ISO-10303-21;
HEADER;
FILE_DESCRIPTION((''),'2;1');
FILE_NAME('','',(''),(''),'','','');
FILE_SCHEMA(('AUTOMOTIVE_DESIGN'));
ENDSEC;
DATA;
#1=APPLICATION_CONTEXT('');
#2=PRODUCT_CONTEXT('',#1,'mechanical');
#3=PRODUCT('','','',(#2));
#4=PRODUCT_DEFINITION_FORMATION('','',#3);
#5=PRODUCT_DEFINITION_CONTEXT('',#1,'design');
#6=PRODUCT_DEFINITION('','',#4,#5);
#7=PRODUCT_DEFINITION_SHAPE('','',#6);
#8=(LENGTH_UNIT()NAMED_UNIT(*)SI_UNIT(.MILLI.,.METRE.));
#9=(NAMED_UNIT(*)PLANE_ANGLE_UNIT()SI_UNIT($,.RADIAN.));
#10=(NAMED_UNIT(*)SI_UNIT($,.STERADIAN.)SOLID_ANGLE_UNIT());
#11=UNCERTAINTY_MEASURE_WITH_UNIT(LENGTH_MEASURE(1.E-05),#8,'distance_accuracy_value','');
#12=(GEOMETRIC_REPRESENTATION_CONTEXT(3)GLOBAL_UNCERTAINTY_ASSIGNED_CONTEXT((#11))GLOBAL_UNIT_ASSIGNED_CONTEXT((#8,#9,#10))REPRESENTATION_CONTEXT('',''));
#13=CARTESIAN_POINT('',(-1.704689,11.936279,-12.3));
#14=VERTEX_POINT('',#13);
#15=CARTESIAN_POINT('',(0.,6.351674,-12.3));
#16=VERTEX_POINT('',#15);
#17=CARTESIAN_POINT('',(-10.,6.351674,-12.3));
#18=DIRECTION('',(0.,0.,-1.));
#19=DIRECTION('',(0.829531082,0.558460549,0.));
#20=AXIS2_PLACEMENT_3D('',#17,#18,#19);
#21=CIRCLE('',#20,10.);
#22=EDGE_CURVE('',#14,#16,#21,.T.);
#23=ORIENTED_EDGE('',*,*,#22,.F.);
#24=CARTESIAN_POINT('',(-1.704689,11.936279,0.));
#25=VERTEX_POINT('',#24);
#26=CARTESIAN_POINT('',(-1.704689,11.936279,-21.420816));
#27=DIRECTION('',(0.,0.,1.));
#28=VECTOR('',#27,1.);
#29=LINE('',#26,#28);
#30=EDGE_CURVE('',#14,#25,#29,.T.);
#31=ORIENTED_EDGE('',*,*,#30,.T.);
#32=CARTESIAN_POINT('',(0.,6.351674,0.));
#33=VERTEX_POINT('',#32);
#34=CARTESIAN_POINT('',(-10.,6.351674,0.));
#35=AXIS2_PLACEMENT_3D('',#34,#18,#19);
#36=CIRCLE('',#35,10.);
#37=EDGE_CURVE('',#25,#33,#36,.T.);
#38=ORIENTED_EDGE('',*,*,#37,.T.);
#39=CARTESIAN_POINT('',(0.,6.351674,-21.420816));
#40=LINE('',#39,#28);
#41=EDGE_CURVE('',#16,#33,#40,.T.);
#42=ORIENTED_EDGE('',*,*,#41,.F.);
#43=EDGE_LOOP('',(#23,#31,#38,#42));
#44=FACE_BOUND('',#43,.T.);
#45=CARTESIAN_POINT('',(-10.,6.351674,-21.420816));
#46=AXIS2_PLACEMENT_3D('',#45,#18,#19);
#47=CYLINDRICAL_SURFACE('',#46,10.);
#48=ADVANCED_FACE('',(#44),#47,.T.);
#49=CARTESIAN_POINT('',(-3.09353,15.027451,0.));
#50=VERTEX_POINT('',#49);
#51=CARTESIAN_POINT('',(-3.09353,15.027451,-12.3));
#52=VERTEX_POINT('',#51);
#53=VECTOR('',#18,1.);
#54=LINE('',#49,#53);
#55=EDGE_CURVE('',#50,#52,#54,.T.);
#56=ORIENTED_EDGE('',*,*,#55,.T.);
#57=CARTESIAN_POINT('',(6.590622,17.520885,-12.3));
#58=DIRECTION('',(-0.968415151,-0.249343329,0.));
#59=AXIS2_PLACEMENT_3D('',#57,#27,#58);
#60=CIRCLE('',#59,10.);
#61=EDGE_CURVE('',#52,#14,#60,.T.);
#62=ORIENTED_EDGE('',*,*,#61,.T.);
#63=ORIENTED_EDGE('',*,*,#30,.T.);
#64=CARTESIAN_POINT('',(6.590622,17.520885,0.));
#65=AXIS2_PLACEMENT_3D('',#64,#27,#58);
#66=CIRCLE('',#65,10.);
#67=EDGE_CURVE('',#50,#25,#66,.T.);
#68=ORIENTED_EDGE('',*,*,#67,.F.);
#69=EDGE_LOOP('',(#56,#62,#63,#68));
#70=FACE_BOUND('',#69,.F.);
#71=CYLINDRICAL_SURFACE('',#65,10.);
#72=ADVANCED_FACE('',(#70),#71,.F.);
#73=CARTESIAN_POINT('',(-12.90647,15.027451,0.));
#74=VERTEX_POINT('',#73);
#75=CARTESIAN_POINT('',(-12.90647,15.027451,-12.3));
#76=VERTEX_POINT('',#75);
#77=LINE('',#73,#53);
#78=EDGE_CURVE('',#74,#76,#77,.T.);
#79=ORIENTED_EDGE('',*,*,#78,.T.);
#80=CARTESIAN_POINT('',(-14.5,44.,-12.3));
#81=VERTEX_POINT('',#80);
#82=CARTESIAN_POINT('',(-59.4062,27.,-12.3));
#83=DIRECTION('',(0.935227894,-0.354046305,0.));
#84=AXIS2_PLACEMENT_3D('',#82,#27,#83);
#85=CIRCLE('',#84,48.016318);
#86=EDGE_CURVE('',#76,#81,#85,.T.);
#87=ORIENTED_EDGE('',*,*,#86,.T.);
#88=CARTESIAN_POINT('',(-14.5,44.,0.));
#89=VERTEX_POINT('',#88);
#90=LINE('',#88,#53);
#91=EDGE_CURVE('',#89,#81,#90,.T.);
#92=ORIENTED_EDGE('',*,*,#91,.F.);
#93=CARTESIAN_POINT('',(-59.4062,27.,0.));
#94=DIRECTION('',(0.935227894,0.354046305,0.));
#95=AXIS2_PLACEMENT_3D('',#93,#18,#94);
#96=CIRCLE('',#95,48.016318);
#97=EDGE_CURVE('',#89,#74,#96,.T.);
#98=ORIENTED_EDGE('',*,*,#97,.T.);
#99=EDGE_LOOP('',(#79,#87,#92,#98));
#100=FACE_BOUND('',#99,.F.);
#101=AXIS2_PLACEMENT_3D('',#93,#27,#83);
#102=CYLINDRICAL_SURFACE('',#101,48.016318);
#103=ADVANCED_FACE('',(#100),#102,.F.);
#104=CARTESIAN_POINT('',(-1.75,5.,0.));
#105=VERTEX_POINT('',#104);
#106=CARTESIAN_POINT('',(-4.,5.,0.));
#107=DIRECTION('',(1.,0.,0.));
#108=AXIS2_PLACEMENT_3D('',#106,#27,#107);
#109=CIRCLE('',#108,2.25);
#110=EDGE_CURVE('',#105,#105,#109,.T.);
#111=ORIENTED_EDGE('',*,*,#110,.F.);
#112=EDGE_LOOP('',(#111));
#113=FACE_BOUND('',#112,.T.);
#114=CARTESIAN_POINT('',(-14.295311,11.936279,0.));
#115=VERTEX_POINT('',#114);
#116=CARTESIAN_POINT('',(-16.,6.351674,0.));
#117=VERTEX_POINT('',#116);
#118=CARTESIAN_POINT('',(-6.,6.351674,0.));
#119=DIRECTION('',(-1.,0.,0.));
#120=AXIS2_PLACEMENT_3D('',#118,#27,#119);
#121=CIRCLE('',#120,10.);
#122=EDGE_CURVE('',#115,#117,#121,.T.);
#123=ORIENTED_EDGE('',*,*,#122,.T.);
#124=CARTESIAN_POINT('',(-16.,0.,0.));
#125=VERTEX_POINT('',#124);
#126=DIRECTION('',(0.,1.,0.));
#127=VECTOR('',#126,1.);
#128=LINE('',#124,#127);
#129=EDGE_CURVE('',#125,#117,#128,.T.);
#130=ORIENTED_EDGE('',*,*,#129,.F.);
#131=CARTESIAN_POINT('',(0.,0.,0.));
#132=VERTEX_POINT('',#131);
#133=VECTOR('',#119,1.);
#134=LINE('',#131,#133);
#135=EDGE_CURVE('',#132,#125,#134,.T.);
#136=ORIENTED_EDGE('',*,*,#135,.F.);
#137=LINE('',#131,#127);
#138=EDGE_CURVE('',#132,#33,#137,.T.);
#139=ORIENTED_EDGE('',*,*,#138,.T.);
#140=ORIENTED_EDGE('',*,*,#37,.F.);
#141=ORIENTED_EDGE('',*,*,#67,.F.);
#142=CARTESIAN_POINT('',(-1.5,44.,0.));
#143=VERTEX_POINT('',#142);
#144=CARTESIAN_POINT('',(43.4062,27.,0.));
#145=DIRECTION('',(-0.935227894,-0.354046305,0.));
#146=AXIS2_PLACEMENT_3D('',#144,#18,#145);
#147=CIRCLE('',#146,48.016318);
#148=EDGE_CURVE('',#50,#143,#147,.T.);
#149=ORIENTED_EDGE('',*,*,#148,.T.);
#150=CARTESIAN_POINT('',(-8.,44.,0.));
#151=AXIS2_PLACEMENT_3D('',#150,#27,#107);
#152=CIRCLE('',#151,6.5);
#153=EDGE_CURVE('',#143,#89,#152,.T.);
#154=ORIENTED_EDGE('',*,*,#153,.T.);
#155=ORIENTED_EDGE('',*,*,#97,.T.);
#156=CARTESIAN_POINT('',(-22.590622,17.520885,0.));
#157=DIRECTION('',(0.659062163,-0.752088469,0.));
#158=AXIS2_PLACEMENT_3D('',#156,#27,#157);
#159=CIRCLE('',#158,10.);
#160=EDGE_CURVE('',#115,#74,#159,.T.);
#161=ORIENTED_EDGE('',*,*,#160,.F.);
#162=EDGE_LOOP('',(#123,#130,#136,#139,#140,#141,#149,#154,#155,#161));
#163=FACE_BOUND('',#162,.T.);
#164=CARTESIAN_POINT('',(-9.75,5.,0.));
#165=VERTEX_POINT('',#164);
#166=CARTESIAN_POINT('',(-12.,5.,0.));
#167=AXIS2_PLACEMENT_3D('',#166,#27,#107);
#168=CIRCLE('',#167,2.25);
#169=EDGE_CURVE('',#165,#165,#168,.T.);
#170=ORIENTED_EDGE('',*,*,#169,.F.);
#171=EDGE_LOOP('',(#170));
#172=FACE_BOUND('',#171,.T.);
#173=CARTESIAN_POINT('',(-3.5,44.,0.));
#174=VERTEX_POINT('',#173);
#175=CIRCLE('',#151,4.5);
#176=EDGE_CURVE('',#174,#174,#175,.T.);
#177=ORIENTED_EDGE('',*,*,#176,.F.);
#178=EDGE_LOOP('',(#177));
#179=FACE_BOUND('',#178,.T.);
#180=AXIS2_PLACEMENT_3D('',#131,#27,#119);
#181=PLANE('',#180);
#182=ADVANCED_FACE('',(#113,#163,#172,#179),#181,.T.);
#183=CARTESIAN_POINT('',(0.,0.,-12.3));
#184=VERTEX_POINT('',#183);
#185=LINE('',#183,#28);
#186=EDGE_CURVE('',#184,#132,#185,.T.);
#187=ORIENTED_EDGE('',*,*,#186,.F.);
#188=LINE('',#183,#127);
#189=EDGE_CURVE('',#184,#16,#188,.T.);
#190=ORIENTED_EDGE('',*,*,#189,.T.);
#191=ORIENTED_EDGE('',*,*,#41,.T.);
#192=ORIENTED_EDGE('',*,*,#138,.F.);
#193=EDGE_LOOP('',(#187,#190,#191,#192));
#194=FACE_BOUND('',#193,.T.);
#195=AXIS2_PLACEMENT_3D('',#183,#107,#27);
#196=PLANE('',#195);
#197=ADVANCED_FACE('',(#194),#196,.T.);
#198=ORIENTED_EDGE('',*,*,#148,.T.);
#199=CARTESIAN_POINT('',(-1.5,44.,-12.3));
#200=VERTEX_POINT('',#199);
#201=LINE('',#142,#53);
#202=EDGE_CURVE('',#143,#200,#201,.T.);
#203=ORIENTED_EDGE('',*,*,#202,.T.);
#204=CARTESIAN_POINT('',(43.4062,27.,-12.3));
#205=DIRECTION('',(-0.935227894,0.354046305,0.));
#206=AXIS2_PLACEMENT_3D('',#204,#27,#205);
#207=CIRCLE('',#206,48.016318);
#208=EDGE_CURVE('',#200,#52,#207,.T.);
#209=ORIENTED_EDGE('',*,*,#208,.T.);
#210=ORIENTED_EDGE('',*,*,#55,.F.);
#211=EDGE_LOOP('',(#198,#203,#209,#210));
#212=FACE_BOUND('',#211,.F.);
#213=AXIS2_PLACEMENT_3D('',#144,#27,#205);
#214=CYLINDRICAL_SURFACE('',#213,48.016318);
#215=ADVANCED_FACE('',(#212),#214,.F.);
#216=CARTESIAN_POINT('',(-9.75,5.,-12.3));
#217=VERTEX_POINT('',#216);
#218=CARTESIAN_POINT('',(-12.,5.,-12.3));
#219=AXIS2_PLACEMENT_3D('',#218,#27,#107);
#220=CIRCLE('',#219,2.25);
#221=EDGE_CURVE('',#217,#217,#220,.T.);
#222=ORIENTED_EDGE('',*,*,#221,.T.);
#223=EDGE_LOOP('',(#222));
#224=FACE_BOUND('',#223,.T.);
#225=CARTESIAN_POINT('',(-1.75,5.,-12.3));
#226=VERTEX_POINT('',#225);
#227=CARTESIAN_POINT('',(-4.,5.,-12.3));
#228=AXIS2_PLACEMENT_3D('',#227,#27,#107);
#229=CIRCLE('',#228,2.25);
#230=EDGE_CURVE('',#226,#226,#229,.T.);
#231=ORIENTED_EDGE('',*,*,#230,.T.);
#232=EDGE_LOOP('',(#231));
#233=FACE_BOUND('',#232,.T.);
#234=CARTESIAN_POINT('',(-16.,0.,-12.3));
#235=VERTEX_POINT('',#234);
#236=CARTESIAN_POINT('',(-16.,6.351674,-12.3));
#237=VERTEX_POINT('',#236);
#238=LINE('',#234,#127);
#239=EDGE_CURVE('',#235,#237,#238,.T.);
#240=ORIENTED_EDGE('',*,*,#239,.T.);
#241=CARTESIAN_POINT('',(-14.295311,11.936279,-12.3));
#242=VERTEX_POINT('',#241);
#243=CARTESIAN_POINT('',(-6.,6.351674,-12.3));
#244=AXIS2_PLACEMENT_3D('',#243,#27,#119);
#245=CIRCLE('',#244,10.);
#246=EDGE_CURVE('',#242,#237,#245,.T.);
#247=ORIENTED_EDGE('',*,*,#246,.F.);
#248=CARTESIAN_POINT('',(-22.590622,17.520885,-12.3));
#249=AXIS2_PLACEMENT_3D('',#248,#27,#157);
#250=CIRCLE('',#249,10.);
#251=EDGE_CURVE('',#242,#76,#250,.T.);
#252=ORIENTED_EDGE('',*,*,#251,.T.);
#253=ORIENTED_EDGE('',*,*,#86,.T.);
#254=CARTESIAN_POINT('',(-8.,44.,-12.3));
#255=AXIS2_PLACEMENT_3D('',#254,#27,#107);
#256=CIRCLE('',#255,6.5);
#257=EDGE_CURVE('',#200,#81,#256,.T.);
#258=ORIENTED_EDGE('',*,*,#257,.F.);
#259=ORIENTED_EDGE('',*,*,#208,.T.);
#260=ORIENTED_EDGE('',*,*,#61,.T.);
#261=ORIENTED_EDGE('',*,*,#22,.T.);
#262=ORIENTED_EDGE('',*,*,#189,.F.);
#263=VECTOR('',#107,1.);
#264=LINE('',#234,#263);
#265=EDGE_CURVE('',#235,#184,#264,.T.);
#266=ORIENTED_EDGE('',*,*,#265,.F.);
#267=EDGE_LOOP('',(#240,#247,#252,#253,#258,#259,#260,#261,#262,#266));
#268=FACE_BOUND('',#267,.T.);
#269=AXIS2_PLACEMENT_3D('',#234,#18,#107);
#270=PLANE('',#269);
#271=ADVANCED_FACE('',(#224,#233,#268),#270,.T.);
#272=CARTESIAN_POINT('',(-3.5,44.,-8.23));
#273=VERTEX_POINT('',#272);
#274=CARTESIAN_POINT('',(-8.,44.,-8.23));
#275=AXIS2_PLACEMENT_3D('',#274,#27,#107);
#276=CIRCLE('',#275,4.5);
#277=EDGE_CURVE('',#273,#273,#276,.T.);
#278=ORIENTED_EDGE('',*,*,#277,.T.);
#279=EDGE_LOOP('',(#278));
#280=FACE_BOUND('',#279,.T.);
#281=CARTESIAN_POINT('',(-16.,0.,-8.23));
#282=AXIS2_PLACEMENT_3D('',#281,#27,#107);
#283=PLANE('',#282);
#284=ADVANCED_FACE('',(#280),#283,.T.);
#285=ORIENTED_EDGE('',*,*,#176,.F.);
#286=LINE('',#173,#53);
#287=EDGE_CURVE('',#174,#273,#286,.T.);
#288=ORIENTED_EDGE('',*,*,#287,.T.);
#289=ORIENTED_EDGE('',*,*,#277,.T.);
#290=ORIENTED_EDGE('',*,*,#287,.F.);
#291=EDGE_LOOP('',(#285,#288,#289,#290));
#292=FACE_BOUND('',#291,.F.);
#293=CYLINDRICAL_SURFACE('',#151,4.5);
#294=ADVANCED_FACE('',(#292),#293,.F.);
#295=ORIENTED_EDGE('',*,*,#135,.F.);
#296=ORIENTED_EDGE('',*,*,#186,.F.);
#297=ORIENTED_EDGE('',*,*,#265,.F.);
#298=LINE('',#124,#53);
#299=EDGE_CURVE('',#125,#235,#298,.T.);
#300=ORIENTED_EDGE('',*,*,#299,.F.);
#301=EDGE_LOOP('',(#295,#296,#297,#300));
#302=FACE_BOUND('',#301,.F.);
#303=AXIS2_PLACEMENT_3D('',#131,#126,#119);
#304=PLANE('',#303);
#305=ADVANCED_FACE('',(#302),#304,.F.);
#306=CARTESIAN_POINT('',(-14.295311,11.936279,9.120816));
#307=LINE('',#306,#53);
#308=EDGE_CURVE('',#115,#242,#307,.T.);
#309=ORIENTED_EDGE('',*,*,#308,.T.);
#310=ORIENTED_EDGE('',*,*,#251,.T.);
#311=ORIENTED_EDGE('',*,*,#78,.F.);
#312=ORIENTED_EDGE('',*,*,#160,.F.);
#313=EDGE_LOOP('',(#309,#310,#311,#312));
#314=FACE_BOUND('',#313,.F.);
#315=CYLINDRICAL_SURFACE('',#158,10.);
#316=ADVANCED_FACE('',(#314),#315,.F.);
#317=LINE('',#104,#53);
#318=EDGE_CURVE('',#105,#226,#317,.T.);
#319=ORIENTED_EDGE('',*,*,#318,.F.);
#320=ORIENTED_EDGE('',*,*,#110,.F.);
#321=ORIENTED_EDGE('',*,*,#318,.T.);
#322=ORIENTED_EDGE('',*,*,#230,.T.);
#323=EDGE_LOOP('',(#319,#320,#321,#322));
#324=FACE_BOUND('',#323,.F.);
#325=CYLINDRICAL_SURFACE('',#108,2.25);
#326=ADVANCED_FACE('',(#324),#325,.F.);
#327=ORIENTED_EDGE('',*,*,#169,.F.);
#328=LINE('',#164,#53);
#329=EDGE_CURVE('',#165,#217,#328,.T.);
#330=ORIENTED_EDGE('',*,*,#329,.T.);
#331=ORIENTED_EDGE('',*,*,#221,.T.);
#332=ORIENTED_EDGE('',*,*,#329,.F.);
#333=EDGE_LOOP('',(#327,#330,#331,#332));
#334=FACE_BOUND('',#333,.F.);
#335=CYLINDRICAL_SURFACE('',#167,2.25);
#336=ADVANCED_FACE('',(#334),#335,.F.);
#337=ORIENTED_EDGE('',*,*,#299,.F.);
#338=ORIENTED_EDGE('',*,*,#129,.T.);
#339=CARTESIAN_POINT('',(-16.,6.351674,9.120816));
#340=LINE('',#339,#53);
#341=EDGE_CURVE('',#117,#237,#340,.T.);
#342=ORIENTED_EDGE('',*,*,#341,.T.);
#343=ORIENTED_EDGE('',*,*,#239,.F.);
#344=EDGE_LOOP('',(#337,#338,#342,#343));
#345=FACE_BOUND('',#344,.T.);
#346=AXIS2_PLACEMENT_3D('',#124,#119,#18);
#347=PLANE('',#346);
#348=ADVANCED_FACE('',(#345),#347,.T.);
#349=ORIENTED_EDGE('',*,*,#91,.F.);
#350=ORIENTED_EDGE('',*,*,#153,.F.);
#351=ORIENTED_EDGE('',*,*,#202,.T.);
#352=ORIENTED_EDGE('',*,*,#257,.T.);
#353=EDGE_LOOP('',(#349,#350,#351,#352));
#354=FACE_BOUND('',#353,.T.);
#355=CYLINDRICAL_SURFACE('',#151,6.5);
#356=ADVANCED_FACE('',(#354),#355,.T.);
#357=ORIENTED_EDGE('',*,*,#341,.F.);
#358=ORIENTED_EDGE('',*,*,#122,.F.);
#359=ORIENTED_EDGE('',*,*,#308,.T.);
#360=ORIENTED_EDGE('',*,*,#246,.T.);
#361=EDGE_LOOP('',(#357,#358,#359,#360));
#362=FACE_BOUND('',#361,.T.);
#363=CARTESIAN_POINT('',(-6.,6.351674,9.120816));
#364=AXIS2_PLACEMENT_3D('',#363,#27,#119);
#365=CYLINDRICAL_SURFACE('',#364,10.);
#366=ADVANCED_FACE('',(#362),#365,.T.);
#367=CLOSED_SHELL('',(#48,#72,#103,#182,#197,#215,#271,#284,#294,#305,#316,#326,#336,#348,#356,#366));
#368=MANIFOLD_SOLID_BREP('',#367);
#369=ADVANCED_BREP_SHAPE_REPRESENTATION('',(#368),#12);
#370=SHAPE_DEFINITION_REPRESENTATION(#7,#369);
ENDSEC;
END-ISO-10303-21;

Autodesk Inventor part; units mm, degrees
ref_plane "YZ Plane" through (0, 0, 0) normal (1, 0, 0) x (0, 1, 0)
ref_plane "XZ Plane" through (0, 0, 0) normal (0, 1, 0) x (-1, 0, 0)
ref_plane "XY Plane" through (0, 0, 0) normal (0, 0, 1) x (1, 0, 0)
sketch "Sketch1" plane through (0, 0, 0) normal (0, 1, 0) x (-1, 0, 0)
  line L0 (0, 0) -> (16, 0)
  line L1 (16, 0) -> (16, -12.3)
  line L2 (16, -12.3) -> (0, -12.3)
  line L3 (0, -12.3) -> (0, 0)
  dimension "d0" = 16
  dimension "d1" = 12.3
extrude "Extrusion1" add sketch "Sketch1" along normal blind 10
sketch "Sketch2" plane through (0, 10, 0) normal (0, 1, 0) x (1, 0, 0)
  line L0 (-16, 0) -> (0, 0) projected
  line L1 (-8, 0) -> (-8, 12.3)
  line L2 (0, 12.3) -> (-16, 12.3) projected
  line L3 (-14.5, 0) -> (-14.5, 12.3)
  line L4 (-1.5, 0) -> (-1.5, 12.3)
  dimension "d4" = 6.5
  dimension "d5" = 6.5
extrude "Extrusion2" add sketch "Sketch2" along normal blind 40.5
sketch "Sketch3" plane through (-16, 0, 0) normal (0, 0, 1) x (1, 0, 0)
  line L0 (14.5, 50.5) -> (1.5, 50.5) projected
  line L1 (8, 50.5) -> (8, 0)
  line L2 (0, 0) -> (16, 0) projected
  circle A0 centre (8, 44) radius 4.5
  line L3 (1.5, 50.5) -> (14.5, 50.5) projected
  circle A1 centre (8, 44) radius 6.5
  line L4 (14.5, 10) -> (14.5, 50.5) projected
  line L5 (14.5, 30.25) -> (1.5, 30.25)
  line L6 (1.5, 10) -> (1.5, 50.5) projected
  line L7 (8, 30.25) -> (11.5, 30.25)
  arc A2 (14.5, 44) -> (14.5, 10) centre (59.4062, 27) ccw
  line L8 (8, 30.25) -> (4.5, 30.25)
  arc A3 (1.5, 10) -> (1.5, 44) centre (-43.4062, 27) ccw
  dimension "d8" = 6.5
  dimension "d9" = 9
  dimension "d10" = 13
  dimension "d11" = 3.5
  dimension "d12" = 3.5
extrude "Extrusion3" cut sketch "Sketch3" against normal blind 13.5 contours L4 A1 L0 | A1 L6 L0 | L4 L5 A2 A1 | A1 A2 | A3 A1 | A1 A3 L5 L6 | L4 A2 L5 | L5 A3 L6
fillet "Fillet1" radius 10 4 edges at (0, 10, -6.15) (-1.5, 10, -6.15) (-14.5, 10, -6.15) (-16, 10, -6.15)
sketch "Sketch4" plane through (-16, 0, 0) normal (0, 0, 1) x (1, 0, 0)
  arc A0 (14.5, 44) -> (1.5, 44) centre (8, 44) ccw projected
  circle A1 centre (8, 44) radius 4.5
  point P0 (16, 0)
  dimension "d16" = 9
extrude "Extrusion4" cut sketch "Sketch4" against normal blind 8.23
sketch "Sketch5" plane through (0, 0, 0) normal (0, -1, 0) x (1, 0, 0)
  point P0 (0, 0)
sketch "Sketch7" plane through (-16, 0, 0) normal (0, 0, 1) x (1, 0, 0)
  line L0 (16, 0) -> (0, 0) projected
  line L1 (0, 0) -> (16, 0)
  line L2 (16, 0) -> (16, 10)
  line L3 (16, 10) -> (0, 10)
  line L4 (0, 10) -> (0, 0)
  line L5 (0, 5) -> (16, 5)
  line L6 (8, 10) -> (8, 0)
  circle A0 centre (4, 5) radius 1
  circle A1 centre (12, 5) radius 1
extrude "Extrusion6" cut sketch "Sketch7" against normal blind 12.3 contours A1 L5 | L5 A1 | A0 L5 | L5 A0
sketch "Sketch8" plane through (-16, 0, 0) normal (0, 0, 1) x (1, 0, 0)
  circle A0 centre (4, 5) radius 1 projected
  circle A1 centre (4, 5) radius 2.25
  circle A2 centre (12, 5) radius 1 projected
  circle A3 centre (12, 5) radius 2.25
  point P0 (16, 0)
  dimension "d24" = 4.5
  dimension "d25" = 4.5
extrude "Extrusion7" cut sketch "Sketch8" against normal blind 12.5
sketch "Sketch9" plane through (-16, 0, 0) normal (0, 0, 1) x (1, 0, 0)
  line L0 (0, 0) -> (0, 6.3517) projected
  line L1 (0, 5) -> (16, 5)
  point P0 (16, 0)
  point P1 (4, 5)
properties part number "pawn"
